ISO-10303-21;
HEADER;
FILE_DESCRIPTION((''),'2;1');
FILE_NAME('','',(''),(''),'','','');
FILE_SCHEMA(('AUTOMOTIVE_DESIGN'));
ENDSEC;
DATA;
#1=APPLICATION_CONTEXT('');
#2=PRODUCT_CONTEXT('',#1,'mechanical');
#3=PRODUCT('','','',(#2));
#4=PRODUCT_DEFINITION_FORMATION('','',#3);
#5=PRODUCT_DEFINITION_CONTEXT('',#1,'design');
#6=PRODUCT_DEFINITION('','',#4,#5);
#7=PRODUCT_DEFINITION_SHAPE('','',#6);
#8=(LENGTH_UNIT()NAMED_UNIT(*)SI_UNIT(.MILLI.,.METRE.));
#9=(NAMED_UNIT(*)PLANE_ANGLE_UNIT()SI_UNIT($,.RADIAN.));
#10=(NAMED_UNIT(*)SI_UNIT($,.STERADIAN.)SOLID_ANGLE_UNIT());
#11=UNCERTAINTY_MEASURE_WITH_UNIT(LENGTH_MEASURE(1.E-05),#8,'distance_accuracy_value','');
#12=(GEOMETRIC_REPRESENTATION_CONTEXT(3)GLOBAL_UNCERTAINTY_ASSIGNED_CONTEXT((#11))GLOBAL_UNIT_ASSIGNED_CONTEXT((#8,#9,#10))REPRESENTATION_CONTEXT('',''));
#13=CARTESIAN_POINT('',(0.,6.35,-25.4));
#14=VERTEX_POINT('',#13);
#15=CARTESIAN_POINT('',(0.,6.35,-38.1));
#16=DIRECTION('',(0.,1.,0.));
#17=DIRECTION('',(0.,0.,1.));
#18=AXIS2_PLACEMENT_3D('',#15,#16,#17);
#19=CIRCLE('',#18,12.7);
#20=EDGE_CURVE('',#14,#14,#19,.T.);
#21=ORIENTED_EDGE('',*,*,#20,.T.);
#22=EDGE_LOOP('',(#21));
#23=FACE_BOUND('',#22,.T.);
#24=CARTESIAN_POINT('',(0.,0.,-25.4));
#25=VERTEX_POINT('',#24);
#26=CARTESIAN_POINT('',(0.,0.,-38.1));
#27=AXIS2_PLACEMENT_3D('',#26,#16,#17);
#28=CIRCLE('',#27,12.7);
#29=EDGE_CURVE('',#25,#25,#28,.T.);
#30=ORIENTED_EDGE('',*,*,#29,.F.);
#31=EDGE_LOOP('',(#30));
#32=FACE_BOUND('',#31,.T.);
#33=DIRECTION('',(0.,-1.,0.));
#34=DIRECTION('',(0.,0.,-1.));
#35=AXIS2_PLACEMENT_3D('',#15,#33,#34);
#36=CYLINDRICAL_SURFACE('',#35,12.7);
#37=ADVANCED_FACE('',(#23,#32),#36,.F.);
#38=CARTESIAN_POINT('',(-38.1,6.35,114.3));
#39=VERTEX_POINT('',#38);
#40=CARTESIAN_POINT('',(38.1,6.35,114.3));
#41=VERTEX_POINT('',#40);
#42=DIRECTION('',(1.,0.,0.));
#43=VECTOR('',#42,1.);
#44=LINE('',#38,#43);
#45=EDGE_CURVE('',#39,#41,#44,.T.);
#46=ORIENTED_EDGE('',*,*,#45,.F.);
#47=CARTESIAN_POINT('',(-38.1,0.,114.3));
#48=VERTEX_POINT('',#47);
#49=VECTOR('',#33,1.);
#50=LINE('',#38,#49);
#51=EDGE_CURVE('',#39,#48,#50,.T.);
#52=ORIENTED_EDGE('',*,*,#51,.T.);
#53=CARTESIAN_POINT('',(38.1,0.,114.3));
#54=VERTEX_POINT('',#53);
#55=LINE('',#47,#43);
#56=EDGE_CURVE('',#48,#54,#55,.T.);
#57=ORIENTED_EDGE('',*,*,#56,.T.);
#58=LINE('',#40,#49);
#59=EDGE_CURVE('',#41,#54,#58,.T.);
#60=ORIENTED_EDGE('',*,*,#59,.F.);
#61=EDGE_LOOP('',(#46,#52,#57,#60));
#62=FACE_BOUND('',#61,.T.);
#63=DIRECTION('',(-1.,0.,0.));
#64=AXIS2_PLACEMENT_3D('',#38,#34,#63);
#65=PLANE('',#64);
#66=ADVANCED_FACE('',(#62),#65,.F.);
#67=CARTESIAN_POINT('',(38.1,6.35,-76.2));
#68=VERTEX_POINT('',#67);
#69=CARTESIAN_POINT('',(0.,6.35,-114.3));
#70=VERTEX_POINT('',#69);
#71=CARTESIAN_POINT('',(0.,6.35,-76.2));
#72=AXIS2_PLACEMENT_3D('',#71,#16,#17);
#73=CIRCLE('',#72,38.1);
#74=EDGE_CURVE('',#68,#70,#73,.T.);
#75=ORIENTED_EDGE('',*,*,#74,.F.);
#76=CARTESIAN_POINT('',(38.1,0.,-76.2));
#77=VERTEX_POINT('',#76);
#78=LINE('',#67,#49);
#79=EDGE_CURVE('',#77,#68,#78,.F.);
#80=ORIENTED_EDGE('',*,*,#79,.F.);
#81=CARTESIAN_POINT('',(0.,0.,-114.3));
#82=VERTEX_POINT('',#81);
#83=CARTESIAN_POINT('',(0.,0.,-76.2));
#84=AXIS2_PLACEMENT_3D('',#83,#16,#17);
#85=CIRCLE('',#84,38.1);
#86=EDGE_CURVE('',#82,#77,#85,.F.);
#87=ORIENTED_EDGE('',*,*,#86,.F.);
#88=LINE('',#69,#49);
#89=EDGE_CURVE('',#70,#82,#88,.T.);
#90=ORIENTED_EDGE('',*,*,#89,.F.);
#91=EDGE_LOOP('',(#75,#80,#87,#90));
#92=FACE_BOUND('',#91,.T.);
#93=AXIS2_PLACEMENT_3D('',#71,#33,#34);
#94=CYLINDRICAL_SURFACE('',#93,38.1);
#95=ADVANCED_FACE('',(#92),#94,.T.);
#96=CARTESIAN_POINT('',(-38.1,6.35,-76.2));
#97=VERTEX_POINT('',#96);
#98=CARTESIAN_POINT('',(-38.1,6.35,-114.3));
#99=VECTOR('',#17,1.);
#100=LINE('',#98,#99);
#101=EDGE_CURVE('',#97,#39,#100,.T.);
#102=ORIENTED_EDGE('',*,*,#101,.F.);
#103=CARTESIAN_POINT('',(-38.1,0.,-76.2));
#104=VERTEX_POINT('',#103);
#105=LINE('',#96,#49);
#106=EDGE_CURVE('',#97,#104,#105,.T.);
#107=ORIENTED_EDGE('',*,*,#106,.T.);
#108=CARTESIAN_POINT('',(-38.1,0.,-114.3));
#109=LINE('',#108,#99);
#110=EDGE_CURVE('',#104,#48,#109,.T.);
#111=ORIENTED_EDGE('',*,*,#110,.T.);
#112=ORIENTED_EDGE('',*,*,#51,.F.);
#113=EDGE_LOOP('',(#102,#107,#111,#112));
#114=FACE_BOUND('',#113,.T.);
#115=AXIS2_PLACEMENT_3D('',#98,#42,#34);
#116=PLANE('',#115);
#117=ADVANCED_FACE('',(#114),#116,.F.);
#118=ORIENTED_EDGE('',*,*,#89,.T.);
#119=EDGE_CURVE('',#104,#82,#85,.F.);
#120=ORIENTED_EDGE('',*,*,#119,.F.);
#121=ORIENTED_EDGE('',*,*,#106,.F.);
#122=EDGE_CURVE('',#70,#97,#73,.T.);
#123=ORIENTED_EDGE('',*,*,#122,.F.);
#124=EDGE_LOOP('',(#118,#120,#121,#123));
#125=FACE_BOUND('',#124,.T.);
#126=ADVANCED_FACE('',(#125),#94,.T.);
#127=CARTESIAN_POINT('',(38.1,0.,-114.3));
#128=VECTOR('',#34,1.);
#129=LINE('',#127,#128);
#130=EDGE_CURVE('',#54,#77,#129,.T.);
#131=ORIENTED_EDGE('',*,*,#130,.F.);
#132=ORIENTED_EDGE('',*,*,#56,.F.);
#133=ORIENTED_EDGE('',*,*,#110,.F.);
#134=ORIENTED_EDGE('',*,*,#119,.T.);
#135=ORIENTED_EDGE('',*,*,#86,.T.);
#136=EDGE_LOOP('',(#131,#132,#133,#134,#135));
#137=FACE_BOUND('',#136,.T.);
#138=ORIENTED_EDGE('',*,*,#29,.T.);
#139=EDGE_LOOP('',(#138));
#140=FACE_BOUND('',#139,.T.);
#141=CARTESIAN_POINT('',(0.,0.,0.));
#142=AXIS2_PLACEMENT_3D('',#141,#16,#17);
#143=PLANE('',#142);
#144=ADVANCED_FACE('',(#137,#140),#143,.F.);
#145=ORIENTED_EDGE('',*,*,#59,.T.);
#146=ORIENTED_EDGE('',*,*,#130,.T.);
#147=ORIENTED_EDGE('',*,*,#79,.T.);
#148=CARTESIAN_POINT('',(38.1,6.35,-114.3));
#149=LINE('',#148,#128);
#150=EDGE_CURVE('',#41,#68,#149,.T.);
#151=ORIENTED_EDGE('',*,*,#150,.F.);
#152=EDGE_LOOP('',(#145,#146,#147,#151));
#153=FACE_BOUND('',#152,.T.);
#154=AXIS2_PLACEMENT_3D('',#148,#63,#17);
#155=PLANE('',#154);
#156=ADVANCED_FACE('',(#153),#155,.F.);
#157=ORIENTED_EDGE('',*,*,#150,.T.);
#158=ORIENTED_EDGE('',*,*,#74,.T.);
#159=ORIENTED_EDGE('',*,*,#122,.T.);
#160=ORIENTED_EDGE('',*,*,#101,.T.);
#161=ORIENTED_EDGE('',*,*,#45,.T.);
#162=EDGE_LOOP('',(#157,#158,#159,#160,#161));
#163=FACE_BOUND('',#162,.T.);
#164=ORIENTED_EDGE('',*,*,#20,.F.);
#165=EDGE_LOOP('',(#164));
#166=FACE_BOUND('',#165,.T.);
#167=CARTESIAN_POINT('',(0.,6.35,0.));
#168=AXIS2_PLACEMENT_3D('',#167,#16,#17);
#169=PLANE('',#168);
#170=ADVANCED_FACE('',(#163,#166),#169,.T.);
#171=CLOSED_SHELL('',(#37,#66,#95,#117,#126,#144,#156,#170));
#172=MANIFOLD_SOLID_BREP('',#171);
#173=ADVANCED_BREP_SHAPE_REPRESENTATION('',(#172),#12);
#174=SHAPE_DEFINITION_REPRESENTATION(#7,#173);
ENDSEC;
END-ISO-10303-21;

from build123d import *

# Parameters (mm, degrees)
SKETCH1_W           = 76.2
SKETCH1_H           = 228.6
SKETCH1_R           = 12.7
BOSS_EXTRUDE1_DEPTH = 6.35
FILLET1_R           = 38.1


with BuildPart() as part:
    # Sketch1 → Boss-Extrude1 (new body)
    with BuildSketch(Plane(origin=(0, 0, 0), x_dir=(-1, 0, 0), z_dir=(0, 1, 0))):
        Rectangle(SKETCH1_W, SKETCH1_H)
        with Locations(Location((0, -38.1, 0), (0, 0, 90))):
            Circle(SKETCH1_R, mode=Mode.SUBTRACT)
    extrude(amount=BOSS_EXTRUDE1_DEPTH)

    # Fillet1
    fillet1_edges = [part.edges().sort_by_distance(p)[0] for p in [
        (-38.1, 3.175, -114.3),
        (38.1, 3.175, -114.3),
    ]]
    fillet(fillet1_edges, radius=FILLET1_R - 0.0001)  # a hair under: the kernel refuses the full size


solid = part.part
